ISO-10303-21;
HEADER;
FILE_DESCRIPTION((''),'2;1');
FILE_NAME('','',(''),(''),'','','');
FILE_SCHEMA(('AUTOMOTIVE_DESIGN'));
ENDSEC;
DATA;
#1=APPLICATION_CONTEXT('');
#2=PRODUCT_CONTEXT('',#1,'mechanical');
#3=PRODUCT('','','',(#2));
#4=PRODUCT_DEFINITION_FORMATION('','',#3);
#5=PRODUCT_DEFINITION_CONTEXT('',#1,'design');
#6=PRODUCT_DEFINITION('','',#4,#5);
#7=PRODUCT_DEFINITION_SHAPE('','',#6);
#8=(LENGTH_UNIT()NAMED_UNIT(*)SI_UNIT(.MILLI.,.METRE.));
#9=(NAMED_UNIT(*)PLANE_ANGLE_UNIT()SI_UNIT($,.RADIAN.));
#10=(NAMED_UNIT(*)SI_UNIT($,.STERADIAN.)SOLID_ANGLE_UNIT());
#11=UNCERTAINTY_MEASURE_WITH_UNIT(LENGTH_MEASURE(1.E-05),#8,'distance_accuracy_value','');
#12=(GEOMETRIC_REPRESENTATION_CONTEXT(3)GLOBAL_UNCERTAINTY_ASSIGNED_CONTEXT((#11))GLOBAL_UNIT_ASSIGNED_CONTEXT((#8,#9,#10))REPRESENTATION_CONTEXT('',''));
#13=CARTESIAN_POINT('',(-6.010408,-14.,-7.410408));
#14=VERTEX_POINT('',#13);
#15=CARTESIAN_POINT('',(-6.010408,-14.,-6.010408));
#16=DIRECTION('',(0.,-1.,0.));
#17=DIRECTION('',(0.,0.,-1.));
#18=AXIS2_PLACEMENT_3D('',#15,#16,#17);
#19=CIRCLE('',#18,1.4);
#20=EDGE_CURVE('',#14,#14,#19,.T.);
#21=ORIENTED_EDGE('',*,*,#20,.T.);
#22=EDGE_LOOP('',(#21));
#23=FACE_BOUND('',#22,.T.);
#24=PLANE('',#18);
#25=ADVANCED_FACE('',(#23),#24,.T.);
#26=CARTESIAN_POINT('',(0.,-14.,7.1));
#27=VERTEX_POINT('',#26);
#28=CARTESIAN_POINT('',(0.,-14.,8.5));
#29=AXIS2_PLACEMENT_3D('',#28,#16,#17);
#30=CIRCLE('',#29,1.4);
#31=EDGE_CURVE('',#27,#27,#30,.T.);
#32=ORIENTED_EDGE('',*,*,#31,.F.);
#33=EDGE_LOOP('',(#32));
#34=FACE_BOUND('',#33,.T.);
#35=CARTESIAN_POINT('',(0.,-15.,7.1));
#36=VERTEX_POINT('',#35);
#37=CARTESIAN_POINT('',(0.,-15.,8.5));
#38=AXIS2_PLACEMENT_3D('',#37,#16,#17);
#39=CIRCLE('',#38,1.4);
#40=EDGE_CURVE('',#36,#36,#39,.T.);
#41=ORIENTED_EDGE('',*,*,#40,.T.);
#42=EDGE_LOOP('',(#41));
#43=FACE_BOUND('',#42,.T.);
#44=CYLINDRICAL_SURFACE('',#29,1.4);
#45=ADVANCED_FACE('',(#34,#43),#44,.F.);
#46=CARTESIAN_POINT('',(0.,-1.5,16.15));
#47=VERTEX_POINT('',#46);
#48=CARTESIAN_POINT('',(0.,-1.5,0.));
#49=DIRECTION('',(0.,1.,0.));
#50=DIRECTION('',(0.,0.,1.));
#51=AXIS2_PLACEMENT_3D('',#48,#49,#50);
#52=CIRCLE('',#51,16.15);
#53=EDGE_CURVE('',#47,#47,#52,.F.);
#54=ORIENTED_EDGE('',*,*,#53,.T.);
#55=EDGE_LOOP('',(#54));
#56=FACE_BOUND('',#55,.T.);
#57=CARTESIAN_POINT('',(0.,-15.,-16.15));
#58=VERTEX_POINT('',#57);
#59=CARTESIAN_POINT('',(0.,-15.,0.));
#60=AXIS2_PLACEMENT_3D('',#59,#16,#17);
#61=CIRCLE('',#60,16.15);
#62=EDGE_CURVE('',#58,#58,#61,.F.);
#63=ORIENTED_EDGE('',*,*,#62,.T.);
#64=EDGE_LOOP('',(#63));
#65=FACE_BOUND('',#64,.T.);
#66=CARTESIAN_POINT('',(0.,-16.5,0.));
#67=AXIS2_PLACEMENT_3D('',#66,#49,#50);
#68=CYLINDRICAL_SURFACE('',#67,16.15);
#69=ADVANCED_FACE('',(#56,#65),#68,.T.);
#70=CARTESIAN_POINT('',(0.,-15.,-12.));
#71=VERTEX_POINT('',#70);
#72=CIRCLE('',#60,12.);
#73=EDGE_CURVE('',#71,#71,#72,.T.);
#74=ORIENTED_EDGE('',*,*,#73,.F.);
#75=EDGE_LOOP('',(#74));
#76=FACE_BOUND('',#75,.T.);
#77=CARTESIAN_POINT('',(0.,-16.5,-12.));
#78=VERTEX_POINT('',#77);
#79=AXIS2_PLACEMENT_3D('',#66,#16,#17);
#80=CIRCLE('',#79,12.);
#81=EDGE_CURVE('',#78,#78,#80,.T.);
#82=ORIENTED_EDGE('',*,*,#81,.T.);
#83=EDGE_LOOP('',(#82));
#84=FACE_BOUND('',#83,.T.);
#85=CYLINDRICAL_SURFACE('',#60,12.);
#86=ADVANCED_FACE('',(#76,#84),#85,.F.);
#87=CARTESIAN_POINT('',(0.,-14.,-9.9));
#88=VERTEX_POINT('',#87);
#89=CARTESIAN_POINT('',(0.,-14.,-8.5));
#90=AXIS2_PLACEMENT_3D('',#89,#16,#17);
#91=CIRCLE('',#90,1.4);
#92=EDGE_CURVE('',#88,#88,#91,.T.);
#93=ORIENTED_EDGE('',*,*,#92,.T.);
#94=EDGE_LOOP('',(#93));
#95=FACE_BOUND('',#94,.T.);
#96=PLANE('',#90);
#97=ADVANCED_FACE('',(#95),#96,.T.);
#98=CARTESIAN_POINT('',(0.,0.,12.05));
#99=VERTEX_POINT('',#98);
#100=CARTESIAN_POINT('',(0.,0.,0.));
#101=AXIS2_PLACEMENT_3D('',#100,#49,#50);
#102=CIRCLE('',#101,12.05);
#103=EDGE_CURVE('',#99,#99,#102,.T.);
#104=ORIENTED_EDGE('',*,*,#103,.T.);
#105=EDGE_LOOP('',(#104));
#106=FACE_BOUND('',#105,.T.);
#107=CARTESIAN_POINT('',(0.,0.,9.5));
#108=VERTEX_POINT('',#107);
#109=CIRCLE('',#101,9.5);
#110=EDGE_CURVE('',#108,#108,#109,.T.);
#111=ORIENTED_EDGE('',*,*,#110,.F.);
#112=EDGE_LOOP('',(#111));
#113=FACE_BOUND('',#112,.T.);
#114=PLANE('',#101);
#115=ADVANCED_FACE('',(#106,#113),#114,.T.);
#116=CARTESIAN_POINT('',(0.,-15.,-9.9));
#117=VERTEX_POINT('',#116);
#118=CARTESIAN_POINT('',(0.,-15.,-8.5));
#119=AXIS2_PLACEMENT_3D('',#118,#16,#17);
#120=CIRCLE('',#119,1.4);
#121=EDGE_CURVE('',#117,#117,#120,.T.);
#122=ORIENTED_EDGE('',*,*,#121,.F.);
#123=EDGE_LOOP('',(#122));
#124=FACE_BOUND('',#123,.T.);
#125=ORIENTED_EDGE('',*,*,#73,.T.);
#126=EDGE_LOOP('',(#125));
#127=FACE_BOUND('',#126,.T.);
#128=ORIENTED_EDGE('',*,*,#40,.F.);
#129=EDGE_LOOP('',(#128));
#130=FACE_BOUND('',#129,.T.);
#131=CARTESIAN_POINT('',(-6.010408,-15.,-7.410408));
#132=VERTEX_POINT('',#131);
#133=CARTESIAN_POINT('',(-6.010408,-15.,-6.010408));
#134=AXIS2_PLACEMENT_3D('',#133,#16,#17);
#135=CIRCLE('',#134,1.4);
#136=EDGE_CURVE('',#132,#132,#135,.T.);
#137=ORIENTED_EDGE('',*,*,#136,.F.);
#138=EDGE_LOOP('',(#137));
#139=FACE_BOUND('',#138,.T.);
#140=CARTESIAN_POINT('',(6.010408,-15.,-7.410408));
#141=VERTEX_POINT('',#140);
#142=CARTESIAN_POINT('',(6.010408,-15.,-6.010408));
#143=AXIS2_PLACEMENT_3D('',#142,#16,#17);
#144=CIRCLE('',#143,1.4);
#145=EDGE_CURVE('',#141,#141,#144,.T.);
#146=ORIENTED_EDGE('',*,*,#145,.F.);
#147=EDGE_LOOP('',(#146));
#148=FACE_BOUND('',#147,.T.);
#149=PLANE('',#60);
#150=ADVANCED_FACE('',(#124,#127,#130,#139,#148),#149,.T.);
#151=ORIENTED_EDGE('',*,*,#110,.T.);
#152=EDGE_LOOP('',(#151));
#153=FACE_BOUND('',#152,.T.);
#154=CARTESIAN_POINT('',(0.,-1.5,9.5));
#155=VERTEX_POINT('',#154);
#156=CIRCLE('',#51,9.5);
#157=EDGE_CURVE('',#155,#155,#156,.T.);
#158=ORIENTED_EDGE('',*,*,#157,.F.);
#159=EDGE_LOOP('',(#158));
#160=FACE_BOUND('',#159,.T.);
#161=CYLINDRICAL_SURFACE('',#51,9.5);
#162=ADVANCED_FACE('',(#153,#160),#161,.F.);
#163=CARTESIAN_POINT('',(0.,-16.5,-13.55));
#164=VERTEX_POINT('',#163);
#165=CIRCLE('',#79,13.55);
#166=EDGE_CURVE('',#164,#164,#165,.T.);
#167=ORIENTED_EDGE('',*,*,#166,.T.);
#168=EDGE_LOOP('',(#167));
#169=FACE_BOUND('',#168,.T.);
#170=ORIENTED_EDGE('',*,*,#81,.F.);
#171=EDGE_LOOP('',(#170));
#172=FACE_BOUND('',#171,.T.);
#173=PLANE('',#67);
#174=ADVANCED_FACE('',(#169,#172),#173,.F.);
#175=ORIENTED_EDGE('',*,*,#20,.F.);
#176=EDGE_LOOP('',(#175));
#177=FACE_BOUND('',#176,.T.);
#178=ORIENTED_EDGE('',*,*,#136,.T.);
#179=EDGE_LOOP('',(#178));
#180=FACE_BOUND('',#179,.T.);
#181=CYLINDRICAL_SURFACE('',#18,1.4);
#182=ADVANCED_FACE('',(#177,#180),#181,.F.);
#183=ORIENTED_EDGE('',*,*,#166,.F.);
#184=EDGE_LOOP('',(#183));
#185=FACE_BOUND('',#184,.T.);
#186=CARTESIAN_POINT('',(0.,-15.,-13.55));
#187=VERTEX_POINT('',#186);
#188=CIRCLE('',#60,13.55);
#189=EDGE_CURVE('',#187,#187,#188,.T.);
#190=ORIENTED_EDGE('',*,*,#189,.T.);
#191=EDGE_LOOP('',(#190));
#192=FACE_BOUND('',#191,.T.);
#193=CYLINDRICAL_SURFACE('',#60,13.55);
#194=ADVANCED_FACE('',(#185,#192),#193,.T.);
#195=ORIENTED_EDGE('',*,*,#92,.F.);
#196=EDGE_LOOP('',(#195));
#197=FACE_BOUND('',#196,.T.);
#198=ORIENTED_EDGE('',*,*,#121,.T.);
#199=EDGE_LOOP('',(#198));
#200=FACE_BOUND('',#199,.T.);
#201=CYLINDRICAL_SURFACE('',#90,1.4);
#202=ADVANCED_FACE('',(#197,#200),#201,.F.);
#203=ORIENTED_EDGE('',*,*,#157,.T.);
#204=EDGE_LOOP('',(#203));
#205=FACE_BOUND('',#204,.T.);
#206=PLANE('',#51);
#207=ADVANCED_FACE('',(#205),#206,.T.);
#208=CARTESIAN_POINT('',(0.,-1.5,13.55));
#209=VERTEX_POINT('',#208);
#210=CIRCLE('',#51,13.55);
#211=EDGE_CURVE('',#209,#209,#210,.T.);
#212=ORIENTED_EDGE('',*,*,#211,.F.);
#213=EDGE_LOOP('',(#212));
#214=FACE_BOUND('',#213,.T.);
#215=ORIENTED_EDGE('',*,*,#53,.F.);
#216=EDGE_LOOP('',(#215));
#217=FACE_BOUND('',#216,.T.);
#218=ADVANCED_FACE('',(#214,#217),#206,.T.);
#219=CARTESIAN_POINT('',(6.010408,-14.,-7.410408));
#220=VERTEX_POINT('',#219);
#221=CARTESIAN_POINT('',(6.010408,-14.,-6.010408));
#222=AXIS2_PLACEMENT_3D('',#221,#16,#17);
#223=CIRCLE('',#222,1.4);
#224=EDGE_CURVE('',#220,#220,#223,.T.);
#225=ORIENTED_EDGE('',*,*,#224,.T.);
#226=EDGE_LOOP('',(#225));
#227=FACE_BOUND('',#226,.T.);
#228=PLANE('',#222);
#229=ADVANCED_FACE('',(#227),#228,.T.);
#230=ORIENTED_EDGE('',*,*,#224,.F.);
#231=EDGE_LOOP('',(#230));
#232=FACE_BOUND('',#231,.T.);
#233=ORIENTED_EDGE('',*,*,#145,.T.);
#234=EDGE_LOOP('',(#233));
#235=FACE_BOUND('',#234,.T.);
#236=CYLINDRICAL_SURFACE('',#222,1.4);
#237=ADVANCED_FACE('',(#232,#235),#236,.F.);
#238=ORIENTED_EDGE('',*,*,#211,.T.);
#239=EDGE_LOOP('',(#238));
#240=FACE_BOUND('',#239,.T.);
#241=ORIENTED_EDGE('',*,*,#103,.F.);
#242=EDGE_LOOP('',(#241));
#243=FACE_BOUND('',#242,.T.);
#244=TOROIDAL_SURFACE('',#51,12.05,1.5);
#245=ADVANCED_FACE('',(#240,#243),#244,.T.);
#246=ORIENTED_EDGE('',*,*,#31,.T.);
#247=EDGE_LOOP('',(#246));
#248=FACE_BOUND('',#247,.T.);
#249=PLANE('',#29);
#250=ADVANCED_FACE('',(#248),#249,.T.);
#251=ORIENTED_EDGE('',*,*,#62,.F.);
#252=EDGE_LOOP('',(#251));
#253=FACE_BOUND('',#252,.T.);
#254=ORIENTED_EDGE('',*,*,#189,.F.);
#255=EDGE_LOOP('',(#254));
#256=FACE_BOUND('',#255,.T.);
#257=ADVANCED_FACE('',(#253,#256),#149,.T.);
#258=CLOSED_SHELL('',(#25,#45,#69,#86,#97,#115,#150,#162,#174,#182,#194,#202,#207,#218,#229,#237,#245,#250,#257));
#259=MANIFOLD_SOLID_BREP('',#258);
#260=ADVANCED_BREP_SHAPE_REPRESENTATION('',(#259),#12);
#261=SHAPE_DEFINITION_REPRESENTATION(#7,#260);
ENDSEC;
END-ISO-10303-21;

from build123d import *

# Parameters (mm, degrees)
SKETCH1_R           = 16.15
BOSS_EXTRUDE1_DEPTH = 16.5
SKETCH2_OUTSIDE_W   = 44.014
SKETCH2_OUTSIDE_H   = 44.014
SKETCH2_OUTSIDE_R   = 13.55
CUT_EXTRUDE1_DEPTH  = 1.5
SKETCH3_R           = 9.5
CUT_EXTRUDE2_DEPTH  = 1.5
SKETCH4_OUTSIDE_W   = 44.014
SKETCH4_OUTSIDE_H   = 44.014
SKETCH4_OUTSIDE_R   = 13.55
CUT_EXTRUDE3_DEPTH  = 1.5
SKETCH5_R           = 12
CUT_EXTRUDE4_DEPTH  = 1.5
SKETCH6_R           = 1.4
CUT_EXTRUDE7_DEPTH  = 2.5
FILLET2_R           = 1.5


with BuildPart() as part:
    # Sketch1 → Boss-Extrude1 (new body)
    with BuildSketch(Plane(origin=(0, 0, 0), x_dir=(1, 0, 0), z_dir=(0, 1, 0))):
        with Locations(Location((0, 0, 0), (0, 0, 270))):
            Circle(SKETCH1_R)
    extrude(amount=-BOSS_EXTRUDE1_DEPTH)

    # Sketch2 outside → Cut-Extrude1 (cut)
    with BuildSketch(Plane(origin=(0, 0, 0), x_dir=(1, 0, 0), z_dir=(0, 1, 0))):
        Rectangle(SKETCH2_OUTSIDE_W, SKETCH2_OUTSIDE_H)
        with Locations(Location((0, 0, 0), (0, 0, 270))):
            Circle(SKETCH2_OUTSIDE_R, mode=Mode.SUBTRACT)
    extrude(amount=-CUT_EXTRUDE1_DEPTH, mode=Mode.SUBTRACT)

    # Sketch3 → Cut-Extrude2 (cut)
    with BuildSketch(Plane(origin=(0, 0, 0), x_dir=(1, 0, 0), z_dir=(0, 1, 0))):
        with Locations(Location((0, 0, 0), (0, 0, 270))):
            Circle(SKETCH3_R)
    extrude(amount=-CUT_EXTRUDE2_DEPTH, mode=Mode.SUBTRACT)

    # Sketch4 outside → Cut-Extrude3 (cut)
    with BuildSketch(Plane(origin=(0, -16.5, 0), x_dir=(-1, 0, 0), z_dir=(0, -1, 0))):
        Rectangle(SKETCH4_OUTSIDE_W, SKETCH4_OUTSIDE_H)
        with Locations(Location((0, 0, 0), (0, 0, 270))):
            Circle(SKETCH4_OUTSIDE_R, mode=Mode.SUBTRACT)
    extrude(amount=-CUT_EXTRUDE3_DEPTH, mode=Mode.SUBTRACT)

    # Sketch5 → Cut-Extrude4 (cut)
    with BuildSketch(Plane(origin=(0, -16.5, 0), x_dir=(-1, 0, 0), z_dir=(0, -1, 0))):
        with Locations(Location((0, 0, 0), (0, 0, 90))):
            Circle(SKETCH5_R)
    extrude(amount=-CUT_EXTRUDE4_DEPTH, mode=Mode.SUBTRACT)

    # Sketch6 → Cut-Extrude7 (cut)
    with BuildSketch(Plane(origin=(0, -16.5, 0), x_dir=(-1, 0, 0), z_dir=(0, -1, 0))):
        with Locations(Location((0, 8.5, 0), (0, 0, 90))):
            Circle(SKETCH6_R)
        with Locations(Location((6.01040764, 6.01040764, 0), (0, 0, 90))):
            Circle(SKETCH6_R)
        with Locations(Location((-6.01040764, 6.01040764, 0), (0, 0, 90))):
            Circle(SKETCH6_R)
        with Locations(Location((0, -8.5, 0), (0, 0, 90))):
            Circle(SKETCH6_R)
    extrude(amount=-CUT_EXTRUDE7_DEPTH, mode=Mode.SUBTRACT)

    # Fillet2
    fillet2_edges = [part.edges().sort_by_distance(p)[0] for p in [
        (0, 0, -13.55),
    ]]
    fillet(fillet2_edges, radius=FILLET2_R - 0.0001)  # a hair under: the kernel refuses the full size


solid = part.part
